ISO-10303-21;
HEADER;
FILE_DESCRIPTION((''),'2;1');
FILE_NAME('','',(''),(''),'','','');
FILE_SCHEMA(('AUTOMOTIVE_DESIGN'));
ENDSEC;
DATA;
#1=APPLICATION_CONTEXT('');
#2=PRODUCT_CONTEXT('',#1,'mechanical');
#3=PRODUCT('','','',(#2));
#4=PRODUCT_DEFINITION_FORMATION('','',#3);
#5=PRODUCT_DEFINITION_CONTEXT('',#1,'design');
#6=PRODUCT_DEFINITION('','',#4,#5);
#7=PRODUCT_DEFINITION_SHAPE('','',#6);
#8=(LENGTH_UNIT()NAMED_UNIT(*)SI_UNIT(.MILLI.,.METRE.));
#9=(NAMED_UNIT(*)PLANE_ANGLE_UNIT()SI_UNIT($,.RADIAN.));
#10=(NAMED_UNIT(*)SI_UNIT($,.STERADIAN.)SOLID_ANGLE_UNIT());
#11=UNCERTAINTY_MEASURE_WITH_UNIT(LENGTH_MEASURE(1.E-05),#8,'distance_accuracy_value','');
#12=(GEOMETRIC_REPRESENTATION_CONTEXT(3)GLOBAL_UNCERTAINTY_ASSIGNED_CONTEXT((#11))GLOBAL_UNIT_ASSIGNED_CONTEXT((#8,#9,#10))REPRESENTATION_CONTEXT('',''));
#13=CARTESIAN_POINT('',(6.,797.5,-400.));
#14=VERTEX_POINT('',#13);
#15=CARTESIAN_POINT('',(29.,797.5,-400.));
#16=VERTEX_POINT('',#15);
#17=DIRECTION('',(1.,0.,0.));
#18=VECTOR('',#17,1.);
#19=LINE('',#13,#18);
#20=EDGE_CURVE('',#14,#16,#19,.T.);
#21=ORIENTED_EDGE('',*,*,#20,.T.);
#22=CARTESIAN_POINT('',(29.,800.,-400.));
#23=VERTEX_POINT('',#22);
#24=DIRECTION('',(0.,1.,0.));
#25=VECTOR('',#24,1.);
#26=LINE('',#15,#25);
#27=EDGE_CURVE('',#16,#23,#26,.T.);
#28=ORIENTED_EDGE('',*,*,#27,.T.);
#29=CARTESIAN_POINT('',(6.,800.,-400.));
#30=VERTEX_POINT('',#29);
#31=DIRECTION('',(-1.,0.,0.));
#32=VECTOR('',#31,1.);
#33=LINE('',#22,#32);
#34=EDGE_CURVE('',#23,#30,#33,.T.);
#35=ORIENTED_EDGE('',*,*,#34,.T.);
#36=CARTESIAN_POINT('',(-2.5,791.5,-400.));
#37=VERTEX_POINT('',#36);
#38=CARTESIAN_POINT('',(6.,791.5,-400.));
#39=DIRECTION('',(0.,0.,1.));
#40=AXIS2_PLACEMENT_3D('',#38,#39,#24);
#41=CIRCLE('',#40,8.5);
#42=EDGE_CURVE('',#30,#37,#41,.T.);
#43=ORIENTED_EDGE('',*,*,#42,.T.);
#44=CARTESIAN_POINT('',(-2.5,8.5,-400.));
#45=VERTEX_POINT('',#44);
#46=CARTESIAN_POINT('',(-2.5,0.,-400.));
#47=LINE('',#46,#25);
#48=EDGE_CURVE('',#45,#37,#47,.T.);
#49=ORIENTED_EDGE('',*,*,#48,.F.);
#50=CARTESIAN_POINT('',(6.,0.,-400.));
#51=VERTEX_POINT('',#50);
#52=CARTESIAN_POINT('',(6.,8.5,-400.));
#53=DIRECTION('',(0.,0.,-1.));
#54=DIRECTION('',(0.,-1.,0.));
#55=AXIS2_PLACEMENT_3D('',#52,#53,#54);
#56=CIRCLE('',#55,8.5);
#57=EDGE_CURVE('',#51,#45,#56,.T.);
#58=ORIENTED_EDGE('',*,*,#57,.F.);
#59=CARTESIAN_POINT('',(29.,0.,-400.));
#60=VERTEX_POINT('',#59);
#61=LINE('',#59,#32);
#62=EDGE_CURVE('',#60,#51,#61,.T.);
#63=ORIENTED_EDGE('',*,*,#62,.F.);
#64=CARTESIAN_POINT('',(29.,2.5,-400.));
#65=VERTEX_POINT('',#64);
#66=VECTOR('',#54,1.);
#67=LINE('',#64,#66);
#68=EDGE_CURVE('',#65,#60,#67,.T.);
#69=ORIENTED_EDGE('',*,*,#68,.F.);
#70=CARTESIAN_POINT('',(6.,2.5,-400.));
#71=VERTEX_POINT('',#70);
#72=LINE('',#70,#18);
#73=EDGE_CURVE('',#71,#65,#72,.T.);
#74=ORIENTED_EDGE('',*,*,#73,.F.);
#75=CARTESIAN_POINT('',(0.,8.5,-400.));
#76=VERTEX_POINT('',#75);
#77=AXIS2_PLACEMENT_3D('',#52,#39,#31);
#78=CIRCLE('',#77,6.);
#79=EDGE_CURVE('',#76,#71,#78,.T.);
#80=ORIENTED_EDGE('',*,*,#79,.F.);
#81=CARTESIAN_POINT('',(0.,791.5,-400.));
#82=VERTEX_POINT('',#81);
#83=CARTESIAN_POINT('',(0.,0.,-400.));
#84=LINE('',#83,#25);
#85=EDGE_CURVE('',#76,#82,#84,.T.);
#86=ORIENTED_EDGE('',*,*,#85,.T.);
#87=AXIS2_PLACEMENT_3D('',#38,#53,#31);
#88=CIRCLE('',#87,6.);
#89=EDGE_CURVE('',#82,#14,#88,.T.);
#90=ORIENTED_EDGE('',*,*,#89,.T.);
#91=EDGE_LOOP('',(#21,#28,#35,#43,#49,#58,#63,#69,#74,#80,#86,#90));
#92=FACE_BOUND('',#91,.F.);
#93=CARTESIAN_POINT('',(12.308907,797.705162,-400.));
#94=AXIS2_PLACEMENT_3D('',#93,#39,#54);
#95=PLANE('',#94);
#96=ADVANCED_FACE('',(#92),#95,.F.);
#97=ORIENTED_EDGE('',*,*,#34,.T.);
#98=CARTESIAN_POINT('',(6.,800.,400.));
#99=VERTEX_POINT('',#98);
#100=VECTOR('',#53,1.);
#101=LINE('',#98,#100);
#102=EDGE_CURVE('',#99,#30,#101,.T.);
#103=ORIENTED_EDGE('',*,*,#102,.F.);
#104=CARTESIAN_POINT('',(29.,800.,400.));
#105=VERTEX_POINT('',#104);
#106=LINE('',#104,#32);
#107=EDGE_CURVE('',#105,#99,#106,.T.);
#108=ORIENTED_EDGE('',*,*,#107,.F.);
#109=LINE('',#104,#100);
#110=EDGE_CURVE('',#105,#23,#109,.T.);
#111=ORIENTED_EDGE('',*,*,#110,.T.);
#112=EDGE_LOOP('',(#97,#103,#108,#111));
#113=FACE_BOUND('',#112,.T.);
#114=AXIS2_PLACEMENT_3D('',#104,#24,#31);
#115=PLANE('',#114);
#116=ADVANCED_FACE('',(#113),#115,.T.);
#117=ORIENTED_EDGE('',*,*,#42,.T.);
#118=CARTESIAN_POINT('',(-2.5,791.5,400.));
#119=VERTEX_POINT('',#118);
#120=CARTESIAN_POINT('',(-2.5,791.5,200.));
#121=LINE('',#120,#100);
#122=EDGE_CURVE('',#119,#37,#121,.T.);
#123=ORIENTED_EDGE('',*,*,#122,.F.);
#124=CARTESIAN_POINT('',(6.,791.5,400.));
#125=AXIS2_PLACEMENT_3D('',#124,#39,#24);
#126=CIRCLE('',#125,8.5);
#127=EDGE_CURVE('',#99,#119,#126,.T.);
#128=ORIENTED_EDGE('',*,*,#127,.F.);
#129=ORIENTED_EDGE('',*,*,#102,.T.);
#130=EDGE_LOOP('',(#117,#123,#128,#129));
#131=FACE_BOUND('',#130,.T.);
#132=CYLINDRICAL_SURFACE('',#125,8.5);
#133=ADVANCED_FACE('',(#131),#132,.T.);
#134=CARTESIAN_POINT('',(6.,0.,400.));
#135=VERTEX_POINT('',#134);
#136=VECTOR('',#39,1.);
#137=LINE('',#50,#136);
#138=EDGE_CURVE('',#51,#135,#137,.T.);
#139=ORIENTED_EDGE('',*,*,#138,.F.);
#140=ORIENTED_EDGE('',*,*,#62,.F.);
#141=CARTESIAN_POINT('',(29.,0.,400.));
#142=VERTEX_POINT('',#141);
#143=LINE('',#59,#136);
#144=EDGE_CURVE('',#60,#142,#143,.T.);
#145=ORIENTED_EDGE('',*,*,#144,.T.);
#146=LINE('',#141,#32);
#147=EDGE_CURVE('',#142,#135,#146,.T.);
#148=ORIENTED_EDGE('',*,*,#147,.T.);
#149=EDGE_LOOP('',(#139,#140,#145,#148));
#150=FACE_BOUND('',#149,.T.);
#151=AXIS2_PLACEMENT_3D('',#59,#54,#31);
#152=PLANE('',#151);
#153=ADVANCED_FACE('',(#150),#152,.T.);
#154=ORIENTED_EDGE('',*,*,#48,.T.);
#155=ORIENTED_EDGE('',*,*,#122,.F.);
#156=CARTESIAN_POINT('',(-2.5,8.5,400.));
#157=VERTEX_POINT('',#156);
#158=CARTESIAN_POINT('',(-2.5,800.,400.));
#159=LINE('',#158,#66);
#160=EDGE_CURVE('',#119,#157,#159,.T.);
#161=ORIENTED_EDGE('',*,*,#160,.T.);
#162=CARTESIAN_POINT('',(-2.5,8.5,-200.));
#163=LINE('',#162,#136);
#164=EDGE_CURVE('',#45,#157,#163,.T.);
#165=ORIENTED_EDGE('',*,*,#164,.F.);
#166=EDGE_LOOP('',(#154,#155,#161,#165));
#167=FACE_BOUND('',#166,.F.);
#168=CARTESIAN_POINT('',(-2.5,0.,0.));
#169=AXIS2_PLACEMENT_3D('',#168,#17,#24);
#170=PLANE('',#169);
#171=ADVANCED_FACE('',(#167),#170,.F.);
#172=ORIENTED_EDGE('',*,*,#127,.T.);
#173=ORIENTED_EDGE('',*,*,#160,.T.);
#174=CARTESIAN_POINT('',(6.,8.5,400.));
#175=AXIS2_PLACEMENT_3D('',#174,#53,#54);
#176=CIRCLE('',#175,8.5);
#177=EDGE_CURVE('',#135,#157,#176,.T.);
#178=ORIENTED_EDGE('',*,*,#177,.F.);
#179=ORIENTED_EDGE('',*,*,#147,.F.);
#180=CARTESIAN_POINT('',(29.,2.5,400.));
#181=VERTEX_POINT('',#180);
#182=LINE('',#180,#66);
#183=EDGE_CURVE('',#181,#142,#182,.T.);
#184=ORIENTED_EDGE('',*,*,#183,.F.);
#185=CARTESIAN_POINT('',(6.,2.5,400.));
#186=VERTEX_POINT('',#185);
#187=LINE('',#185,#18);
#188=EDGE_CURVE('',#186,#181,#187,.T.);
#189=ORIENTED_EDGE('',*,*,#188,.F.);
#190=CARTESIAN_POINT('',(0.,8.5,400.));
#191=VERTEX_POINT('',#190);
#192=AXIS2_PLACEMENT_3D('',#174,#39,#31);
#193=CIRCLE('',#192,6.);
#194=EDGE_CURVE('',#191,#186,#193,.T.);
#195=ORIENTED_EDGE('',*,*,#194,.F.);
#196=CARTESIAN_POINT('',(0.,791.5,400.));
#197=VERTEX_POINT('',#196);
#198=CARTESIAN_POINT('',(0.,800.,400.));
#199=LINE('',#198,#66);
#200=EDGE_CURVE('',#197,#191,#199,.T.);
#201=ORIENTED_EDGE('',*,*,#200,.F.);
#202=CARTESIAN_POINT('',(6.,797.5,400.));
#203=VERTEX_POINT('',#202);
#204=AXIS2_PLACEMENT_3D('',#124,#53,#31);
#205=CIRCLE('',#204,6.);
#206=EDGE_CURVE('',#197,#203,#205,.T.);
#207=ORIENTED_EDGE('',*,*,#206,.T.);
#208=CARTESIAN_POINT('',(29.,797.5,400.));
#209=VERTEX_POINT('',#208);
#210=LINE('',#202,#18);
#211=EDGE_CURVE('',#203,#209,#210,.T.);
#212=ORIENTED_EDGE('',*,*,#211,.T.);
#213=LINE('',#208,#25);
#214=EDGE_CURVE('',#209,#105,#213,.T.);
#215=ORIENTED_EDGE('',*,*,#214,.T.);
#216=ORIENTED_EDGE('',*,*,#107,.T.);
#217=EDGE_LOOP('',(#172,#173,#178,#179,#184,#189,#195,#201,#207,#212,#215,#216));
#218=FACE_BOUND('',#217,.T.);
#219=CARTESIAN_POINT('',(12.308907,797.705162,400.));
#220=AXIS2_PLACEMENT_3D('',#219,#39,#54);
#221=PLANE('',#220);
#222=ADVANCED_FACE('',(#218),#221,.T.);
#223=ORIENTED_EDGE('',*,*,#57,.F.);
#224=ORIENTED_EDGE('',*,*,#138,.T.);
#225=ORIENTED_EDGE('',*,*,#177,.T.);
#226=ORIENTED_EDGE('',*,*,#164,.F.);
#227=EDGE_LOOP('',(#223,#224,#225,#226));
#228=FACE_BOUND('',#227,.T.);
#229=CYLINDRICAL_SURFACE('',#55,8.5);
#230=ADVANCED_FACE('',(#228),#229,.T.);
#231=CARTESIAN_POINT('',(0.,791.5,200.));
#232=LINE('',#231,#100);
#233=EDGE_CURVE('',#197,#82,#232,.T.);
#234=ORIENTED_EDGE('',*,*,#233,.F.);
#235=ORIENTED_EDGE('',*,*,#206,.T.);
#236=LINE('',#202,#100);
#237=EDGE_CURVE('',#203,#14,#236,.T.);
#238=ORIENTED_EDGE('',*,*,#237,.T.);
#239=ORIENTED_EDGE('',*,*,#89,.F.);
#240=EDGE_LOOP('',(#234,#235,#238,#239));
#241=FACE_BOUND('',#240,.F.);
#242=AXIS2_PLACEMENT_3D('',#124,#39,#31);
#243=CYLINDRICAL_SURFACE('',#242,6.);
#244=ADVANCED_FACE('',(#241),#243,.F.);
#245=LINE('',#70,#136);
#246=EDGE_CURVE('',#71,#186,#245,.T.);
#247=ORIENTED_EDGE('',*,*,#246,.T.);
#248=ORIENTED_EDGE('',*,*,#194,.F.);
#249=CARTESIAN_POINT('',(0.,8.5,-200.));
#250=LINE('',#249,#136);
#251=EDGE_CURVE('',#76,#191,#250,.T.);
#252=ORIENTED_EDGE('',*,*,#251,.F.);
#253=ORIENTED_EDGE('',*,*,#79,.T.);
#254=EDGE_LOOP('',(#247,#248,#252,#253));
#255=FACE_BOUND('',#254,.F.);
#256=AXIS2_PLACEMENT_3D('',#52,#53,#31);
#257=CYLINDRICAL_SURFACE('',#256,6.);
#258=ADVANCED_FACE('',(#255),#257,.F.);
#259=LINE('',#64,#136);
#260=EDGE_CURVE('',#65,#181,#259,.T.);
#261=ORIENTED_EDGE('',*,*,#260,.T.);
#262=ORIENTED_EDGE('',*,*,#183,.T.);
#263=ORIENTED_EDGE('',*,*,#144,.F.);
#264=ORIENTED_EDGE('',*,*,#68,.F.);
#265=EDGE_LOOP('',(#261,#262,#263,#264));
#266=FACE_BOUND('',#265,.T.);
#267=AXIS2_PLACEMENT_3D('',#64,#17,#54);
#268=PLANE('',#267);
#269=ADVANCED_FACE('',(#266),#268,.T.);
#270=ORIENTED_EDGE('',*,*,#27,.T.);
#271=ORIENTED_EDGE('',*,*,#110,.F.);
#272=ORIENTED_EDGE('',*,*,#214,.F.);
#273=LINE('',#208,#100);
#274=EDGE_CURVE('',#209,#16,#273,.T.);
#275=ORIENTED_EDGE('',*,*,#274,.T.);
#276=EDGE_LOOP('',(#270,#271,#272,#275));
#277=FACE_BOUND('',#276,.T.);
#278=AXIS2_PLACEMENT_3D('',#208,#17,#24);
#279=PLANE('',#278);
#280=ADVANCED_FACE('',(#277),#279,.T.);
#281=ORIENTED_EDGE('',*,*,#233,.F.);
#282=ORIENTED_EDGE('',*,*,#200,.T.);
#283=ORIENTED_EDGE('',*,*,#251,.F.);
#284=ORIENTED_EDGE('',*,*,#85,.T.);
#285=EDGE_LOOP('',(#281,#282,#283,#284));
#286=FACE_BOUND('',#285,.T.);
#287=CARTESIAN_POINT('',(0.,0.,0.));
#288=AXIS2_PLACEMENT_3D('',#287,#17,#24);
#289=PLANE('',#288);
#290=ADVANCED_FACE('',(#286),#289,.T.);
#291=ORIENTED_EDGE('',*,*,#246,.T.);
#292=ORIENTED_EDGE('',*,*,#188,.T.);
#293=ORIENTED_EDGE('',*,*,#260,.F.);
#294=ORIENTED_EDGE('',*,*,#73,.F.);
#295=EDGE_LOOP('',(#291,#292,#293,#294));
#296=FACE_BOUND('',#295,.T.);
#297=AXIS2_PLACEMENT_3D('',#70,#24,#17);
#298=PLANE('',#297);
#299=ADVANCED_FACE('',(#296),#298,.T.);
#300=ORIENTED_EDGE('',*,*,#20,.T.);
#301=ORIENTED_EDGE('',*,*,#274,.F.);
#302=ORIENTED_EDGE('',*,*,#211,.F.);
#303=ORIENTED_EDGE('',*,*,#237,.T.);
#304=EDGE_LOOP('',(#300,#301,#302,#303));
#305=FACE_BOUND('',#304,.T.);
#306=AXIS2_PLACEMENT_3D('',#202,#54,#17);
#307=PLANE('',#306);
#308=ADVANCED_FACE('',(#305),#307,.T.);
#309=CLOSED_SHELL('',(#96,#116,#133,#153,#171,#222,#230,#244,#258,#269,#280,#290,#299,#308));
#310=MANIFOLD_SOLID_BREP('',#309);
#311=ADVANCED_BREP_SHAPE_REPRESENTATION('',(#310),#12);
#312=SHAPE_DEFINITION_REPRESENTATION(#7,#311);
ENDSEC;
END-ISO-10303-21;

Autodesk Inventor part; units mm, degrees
ref_plane "YZ Plane" through (0, 0, 0) normal (1, 0, 0) x (0, 1, 0)
ref_plane "XZ Plane" through (0, 0, 0) normal (0, 1, 0) x (-1, 0, 0)
ref_plane "XY Plane" through (0, 0, 0) normal (0, 0, 1) x (1, 0, 0)
sketch "Náčrt2" plane through (0, 0, 0) normal (1, 0, 0) x (0, 1, 0)
  line L0 (800, 400) -> (0, 400)
  line L1 (0, 400) -> (0, -400)
  line L2 (0, -400) -> (800, -400)
  line L3 (800, -400) -> (800, 400)
  point P0 (0, 0)
  point P1 (0, 0)
  dimension "d0" = 800
  dimension "d1" = 800
extrude "Vysunutí1" add sketch "Náčrt2" against normal blind 2.5
sketch "Náčrt3" plane through (-2.5, 797.5, 400) normal (0, 1, 0) x (-1, 0, 0)
  line L0 (0, -800) -> (0, 0)
  line L1 (0, 0) -> (-31.5, 0)
  line L2 (-31.5, 0) -> (-31.5, -800)
  line L3 (-31.5, -800) -> (0, -800)
edge flange "Obruba1" height 31.5 angle 90 thickness 2.5 bend radius 6 thickness toward (0, 1, 0) relief tear relief width 2.5 relief depth 1.25 corner gap 2.5 corner form 0 edges at (0, 800, 0) (0, 0, 0) wall of the first edge with corners at (-2.5, 797.5, -400) (-2.5, 797.5, 400) (29, 797.5, 400) (29, 797.5, -400)
bend "Ohyb1"
corner "Roh1"
equation "\"d4\" = ŠířkaVýštipu"
equation "\"d5\" = HloubkaVýštipu"
equation "\"d6\" = MinimálníZbytek"
equation "\"d7\" = PoloměrOhybu"
equation "\"d11\" = VelikostRohovéhoVýštipu"
equation "\"d12\" = VelikostMezery"
equation "\"d13\" = VelikostJacobihoPoloměru"
equation "\"PoloměrOhybu\" = Tloušťka"
equation "\"ŠířkaVýštipu\" = Tloušťka"
equation "\"HloubkaVýštipu\" = 0.5 * Tloušťka"
equation "\"MinimálníZbytek\" = 2 * Tloušťka"
equation "\"PřechodovýPoloměr\" = PoloměrOhybu"
equation "\"VelikostJacobihoPoloměru\" = PoloměrOhybu"
equation "\"VelikostMezery\" = Tloušťka"
equation "\"VelikostRohovéhoVýštipu\" = 10"
equation "\"Tloušťka\" = 2.5"
properties part number "DD_KVD_002_02" material "Nerezová ocel"
